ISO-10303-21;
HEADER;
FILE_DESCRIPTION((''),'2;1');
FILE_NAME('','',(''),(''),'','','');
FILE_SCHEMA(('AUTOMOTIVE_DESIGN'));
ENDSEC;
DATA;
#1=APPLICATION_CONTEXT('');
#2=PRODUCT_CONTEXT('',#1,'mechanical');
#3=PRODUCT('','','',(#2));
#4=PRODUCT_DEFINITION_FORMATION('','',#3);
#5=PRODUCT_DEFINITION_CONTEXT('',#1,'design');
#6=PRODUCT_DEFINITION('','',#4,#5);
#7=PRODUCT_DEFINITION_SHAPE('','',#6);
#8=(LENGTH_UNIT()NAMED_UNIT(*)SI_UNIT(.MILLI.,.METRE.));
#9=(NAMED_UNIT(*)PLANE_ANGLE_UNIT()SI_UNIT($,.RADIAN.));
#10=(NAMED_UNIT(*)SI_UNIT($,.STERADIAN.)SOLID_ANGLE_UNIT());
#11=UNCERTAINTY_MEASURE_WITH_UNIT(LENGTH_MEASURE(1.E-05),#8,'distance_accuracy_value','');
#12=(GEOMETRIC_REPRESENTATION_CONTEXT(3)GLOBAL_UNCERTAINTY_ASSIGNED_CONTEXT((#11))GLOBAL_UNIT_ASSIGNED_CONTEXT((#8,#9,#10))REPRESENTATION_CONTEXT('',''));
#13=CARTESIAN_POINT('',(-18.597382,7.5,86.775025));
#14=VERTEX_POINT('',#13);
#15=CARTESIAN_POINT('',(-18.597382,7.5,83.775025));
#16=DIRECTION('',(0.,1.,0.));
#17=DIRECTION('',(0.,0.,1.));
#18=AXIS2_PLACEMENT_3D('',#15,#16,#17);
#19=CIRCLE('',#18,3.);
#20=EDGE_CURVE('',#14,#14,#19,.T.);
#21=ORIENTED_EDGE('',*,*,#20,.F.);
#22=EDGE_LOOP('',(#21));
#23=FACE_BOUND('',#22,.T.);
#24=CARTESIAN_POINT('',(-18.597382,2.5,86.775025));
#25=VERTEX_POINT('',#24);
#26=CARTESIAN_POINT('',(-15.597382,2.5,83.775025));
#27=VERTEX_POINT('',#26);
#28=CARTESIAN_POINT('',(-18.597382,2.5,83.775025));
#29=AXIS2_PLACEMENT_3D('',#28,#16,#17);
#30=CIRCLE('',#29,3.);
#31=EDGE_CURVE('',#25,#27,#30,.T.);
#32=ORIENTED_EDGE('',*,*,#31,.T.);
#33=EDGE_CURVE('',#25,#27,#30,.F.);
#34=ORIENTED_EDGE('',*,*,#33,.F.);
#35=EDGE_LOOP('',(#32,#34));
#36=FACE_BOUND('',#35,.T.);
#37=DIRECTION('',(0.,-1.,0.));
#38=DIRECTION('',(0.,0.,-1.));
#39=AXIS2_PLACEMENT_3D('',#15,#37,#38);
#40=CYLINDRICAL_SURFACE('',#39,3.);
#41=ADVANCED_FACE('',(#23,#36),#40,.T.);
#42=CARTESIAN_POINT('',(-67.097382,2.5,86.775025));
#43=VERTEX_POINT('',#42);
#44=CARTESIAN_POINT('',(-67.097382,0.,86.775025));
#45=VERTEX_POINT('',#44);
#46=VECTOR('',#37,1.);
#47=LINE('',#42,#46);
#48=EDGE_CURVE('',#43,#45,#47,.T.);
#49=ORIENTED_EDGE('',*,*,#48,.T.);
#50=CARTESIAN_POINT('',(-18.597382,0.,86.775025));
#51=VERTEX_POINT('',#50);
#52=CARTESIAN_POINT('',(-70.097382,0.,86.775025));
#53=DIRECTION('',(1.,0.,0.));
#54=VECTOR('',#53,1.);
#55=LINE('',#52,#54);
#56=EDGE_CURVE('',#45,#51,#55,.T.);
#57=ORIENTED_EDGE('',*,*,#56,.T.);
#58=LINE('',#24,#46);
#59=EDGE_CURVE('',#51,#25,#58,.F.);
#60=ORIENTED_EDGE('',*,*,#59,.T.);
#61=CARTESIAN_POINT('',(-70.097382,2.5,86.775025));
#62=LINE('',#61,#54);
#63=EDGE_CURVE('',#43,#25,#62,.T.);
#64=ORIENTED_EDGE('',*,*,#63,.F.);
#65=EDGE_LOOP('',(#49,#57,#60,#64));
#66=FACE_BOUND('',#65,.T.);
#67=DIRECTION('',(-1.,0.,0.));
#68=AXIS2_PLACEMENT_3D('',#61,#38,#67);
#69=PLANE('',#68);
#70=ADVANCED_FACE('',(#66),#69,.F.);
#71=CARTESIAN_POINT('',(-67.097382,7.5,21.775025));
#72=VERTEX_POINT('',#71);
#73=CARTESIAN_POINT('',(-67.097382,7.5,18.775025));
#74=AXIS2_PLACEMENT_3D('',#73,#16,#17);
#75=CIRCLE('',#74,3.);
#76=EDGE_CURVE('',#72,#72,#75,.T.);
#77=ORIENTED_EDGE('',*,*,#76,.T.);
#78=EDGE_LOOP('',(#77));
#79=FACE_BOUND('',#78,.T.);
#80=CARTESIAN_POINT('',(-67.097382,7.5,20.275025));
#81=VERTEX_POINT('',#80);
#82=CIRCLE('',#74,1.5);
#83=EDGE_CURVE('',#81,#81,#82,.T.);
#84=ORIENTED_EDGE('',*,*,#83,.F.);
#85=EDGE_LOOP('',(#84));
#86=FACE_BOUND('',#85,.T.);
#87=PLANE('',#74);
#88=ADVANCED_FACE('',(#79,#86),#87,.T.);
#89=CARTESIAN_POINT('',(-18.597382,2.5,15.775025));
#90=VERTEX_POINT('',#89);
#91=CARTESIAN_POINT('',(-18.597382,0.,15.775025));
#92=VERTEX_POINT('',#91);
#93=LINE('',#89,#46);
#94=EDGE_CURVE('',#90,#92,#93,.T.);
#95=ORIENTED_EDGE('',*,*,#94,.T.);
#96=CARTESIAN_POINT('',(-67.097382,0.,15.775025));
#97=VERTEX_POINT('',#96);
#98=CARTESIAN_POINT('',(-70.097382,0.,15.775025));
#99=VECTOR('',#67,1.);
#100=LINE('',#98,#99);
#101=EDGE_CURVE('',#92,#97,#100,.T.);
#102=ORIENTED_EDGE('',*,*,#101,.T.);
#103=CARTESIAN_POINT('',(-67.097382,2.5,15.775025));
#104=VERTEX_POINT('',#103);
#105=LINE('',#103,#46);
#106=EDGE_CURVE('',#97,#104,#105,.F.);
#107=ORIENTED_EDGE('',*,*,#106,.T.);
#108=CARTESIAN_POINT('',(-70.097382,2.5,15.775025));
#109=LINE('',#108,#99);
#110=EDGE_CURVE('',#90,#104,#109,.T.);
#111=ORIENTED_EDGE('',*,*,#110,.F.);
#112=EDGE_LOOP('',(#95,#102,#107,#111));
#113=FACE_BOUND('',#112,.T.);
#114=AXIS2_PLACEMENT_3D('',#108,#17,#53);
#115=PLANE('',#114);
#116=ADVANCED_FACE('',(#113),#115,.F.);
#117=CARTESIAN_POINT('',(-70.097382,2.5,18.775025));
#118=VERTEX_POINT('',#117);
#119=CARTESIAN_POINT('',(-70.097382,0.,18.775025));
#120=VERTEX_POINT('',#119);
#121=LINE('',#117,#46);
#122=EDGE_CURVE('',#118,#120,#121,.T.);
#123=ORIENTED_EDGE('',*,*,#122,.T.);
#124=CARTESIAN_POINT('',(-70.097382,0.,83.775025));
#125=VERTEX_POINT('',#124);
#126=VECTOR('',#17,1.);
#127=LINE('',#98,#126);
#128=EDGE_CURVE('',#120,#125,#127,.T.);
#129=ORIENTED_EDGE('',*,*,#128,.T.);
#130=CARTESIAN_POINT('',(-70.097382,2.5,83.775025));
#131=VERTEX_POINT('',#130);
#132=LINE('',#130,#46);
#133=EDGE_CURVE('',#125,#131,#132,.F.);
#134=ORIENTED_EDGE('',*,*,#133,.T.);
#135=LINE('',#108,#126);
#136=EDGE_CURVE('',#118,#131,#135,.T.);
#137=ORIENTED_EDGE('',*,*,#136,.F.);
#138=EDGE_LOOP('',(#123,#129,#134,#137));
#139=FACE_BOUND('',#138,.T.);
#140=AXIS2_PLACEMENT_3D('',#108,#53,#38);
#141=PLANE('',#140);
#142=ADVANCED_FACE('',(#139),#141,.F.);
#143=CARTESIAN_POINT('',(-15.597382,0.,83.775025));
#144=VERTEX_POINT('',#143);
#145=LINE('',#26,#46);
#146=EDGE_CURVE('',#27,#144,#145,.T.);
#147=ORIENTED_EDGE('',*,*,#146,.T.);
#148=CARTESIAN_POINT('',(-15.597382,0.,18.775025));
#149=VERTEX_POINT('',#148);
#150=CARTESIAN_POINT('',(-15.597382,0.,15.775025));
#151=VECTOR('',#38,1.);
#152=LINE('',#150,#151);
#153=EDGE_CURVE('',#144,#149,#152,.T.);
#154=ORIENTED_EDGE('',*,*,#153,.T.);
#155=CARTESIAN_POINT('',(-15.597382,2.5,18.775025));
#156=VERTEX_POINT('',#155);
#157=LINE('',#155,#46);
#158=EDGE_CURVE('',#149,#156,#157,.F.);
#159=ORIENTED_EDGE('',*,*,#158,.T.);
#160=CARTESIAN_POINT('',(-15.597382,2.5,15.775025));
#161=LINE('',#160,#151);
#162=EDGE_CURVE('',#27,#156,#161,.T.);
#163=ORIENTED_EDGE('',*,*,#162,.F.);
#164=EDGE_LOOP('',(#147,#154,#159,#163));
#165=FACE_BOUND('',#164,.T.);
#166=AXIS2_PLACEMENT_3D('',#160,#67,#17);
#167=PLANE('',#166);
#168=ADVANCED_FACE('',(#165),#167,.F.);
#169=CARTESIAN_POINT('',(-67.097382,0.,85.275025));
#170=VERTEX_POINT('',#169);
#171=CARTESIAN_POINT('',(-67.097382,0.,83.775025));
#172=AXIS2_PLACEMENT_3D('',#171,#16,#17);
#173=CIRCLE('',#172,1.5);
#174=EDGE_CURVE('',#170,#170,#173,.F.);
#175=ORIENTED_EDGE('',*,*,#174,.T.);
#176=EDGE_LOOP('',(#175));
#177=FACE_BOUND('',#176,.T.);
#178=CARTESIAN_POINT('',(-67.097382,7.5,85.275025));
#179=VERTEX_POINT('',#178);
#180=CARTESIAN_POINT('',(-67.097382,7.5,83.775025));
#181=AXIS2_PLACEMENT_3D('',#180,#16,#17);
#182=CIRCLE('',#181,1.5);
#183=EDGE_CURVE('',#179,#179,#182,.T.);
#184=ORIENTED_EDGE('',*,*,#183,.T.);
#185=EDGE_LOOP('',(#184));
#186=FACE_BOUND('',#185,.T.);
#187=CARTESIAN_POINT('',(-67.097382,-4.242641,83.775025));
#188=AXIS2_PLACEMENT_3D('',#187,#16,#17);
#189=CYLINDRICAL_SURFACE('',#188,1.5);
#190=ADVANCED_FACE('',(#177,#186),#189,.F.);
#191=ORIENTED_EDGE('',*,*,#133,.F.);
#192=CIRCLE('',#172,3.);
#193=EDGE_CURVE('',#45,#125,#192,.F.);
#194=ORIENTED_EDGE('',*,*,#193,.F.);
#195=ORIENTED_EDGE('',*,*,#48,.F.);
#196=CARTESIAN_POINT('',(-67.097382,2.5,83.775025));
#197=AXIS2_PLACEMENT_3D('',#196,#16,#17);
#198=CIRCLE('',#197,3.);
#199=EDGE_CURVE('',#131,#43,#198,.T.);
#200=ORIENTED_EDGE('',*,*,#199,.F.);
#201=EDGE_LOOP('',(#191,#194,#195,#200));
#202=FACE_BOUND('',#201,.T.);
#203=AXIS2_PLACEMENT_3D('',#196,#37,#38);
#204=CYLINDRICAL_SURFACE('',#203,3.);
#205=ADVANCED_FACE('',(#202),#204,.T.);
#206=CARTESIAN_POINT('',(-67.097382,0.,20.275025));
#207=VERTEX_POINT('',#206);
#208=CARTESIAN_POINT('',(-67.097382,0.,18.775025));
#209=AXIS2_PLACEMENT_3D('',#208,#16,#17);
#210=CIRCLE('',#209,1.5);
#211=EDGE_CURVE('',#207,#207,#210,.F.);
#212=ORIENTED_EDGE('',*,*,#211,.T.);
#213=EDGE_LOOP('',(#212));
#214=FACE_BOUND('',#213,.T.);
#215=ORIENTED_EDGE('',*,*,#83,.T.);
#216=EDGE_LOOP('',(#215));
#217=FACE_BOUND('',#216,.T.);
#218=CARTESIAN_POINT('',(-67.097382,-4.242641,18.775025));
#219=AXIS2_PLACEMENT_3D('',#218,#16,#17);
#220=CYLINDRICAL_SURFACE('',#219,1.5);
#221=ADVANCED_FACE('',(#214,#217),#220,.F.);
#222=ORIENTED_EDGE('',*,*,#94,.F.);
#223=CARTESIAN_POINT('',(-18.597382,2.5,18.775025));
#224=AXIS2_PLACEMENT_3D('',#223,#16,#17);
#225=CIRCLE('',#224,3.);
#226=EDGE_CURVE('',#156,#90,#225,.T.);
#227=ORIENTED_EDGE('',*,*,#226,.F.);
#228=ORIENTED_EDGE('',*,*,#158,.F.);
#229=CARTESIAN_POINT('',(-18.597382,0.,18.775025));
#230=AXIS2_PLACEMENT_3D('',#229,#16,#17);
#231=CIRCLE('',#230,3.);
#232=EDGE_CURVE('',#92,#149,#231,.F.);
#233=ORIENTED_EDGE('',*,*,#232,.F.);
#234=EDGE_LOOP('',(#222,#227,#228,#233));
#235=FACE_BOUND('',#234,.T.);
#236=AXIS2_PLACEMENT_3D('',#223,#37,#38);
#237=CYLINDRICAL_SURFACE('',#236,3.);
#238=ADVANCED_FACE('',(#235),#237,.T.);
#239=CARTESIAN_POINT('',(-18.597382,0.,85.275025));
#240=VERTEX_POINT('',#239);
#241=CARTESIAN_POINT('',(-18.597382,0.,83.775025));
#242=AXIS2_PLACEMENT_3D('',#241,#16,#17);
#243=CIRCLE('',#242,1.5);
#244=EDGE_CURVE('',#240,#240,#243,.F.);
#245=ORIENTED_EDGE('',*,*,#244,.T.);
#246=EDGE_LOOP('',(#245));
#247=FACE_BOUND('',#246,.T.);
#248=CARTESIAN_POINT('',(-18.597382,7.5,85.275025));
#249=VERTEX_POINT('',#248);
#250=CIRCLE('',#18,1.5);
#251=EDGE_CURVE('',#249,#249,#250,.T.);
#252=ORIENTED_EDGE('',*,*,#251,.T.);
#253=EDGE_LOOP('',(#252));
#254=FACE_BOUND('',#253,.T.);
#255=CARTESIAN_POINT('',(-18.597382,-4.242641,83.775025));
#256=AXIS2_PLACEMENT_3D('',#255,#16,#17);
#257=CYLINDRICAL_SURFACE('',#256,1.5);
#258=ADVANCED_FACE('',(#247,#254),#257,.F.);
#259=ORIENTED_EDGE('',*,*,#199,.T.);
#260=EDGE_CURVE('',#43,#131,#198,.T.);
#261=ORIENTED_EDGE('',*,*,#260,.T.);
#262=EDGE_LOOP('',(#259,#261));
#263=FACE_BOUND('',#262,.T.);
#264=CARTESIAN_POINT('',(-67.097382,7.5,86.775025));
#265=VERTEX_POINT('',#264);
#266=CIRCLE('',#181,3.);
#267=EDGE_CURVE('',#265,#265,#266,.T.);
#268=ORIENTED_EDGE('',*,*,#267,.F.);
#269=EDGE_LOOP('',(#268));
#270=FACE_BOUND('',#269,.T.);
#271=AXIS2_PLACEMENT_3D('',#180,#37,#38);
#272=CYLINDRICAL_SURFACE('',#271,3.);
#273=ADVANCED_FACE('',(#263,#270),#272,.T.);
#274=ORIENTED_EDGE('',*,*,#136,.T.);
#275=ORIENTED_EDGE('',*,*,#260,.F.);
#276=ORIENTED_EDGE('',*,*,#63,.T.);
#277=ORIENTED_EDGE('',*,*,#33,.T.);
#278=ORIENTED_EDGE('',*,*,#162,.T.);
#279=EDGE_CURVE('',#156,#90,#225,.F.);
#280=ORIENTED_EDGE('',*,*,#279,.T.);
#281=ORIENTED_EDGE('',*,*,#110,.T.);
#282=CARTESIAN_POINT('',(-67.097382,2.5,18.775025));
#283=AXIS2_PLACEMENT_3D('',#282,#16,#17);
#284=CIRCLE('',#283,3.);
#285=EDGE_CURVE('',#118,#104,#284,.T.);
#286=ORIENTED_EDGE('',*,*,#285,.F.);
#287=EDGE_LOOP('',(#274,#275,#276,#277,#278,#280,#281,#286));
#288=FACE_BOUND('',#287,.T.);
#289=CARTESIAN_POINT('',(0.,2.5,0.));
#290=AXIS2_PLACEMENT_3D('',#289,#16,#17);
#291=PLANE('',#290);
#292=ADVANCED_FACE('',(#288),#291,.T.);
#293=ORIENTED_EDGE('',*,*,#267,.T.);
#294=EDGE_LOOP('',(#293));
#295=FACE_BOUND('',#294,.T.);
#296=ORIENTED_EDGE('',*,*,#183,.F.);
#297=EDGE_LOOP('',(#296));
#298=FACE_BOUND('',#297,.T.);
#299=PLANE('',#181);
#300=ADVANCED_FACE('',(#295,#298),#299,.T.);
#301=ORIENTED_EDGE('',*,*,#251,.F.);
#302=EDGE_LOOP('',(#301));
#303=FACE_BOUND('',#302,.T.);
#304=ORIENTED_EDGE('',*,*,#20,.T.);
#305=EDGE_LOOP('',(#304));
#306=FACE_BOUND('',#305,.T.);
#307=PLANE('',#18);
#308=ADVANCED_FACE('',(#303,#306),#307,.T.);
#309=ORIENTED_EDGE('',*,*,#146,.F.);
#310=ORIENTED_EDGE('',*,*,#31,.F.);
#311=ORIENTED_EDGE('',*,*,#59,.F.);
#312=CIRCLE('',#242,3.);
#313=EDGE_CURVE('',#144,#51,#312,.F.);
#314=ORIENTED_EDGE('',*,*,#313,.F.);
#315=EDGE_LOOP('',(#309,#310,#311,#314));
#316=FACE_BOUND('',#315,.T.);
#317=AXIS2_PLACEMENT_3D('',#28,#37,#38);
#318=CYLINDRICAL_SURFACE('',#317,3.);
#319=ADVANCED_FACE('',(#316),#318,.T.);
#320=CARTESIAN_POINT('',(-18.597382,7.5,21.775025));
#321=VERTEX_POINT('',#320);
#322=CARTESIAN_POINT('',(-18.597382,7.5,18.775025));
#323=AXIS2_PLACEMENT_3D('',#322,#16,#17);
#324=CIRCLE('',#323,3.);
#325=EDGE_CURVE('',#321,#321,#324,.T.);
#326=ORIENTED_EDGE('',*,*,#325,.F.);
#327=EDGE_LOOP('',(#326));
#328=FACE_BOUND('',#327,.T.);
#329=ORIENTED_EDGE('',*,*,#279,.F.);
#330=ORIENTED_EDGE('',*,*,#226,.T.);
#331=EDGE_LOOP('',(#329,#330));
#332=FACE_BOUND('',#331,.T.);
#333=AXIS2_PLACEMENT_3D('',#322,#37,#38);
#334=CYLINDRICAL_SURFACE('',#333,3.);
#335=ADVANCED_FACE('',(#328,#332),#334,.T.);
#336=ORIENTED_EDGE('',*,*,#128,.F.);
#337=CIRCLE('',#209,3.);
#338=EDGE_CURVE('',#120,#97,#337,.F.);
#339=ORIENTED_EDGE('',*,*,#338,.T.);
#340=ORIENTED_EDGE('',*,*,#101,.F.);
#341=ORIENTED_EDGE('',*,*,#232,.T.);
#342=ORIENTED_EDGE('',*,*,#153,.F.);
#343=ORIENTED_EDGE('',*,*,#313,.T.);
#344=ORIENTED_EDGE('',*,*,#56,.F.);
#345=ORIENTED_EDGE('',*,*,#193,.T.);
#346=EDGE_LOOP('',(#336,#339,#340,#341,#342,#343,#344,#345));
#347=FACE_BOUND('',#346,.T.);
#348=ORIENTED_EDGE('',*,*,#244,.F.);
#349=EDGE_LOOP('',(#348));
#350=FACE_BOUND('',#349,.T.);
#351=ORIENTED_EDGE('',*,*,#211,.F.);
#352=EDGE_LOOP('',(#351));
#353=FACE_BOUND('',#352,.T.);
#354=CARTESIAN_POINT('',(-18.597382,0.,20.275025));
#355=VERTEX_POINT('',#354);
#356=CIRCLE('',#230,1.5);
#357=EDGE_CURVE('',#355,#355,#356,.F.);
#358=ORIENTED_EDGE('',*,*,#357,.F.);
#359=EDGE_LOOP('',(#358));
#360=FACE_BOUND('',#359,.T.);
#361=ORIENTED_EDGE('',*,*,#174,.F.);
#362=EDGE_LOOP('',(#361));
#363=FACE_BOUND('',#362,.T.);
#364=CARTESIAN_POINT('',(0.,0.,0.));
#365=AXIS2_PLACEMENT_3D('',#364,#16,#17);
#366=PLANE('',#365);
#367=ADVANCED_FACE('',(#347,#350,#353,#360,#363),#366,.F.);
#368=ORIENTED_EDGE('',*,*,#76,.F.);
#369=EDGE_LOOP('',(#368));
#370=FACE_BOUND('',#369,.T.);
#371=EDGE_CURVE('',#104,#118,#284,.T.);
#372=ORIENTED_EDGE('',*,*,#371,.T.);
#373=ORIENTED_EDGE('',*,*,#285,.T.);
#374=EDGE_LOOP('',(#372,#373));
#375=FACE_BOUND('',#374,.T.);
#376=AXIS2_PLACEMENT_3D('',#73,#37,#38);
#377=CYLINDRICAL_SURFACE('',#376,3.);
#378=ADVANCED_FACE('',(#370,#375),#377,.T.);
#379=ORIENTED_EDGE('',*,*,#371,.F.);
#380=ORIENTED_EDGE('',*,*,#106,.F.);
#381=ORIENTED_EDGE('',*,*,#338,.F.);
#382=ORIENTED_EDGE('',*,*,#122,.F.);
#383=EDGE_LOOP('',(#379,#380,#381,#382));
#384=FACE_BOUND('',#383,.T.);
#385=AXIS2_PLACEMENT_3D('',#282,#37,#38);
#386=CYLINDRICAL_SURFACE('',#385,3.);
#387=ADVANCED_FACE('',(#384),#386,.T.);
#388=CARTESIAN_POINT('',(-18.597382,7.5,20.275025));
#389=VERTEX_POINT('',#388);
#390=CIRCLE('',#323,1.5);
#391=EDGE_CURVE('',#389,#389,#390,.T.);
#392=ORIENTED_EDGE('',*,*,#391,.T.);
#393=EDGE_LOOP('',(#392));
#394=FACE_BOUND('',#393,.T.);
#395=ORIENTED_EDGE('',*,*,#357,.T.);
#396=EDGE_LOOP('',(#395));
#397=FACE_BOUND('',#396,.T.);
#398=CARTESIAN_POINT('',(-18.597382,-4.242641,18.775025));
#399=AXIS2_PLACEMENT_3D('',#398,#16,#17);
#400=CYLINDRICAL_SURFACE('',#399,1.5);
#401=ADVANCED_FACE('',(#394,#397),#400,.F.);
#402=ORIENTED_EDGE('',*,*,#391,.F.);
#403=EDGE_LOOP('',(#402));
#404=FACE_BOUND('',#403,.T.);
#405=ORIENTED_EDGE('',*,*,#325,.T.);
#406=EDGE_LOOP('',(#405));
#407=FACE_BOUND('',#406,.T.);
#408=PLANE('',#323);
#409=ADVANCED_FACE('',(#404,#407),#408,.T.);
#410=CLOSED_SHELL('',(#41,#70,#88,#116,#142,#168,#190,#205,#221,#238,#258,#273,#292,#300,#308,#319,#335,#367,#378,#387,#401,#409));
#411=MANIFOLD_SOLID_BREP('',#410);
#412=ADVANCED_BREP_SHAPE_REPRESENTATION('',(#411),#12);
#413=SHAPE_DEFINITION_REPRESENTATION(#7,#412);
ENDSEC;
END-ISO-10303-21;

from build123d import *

# Parameters (mm, degrees)
SKETCH1_W           = 54.5
SKETCH1_H           = 71
BOSS_EXTRUDE1_DEPTH = 2.5
SKETCH2_R           = 3
BOSS_EXTRUDE2_DEPTH = 5
FILLET1_R           = 3
SKETCH3_R           = 1.5
CUT_EXTRUDE1_DEPTH  = 7.5


with BuildPart() as part:
    # Sketch1 → Boss-Extrude1 (new body)
    with BuildSketch(Plane(origin=(0, 0, 0), x_dir=(1, 0, 0), z_dir=(0, 1, 0))):
        with Locations((-42.847381712, -51.275024631)):
            Rectangle(SKETCH1_W, SKETCH1_H)
    extrude(amount=BOSS_EXTRUDE1_DEPTH)

    # Sketch2 → Boss-Extrude2 (add)
    with BuildSketch(Plane(origin=(0, 2.5, 0), x_dir=(1, 0, 0), z_dir=(0, 1, 0))):
        with Locations(Location((-67.097381712, -18.775024631, 0), (0, 0, 90))):
            Circle(SKETCH2_R)
        with Locations(Location((-18.597381712, -18.775024631, 0), (0, 0, 90))):
            Circle(SKETCH2_R)
        with Locations(Location((-18.597381712, -83.775024631, 0), (0, 0, 270))):
            Circle(SKETCH2_R)
        with Locations(Location((-67.097381712, -83.775024631, 0), (0, 0, 270))):
            Circle(SKETCH2_R)
    extrude(amount=BOSS_EXTRUDE2_DEPTH)

    # Fillet1
    fillet1_edges = [part.edges().sort_by_distance(p)[0] for p in [
        (-70.097381712, 1.25, 15.775024631),
        (-15.597381712, 1.25, 15.775024631),
        (-15.597381712, 1.25, 86.775024631),
        (-70.097381712, 1.25, 86.775024631),
    ]]
    fillet(fillet1_edges, radius=FILLET1_R - 0.0001)  # a hair under: the kernel refuses the full size

    # Sketch3 → Cut-Extrude1 (cut)
    with BuildSketch(Plane(origin=(0, 7.5, 0), x_dir=(1, 0, 0), z_dir=(0, 1, 0))):
        with Locations(Location((-67.097381712, -18.775024631, 0), (0, 0, 270))):
            Circle(SKETCH3_R)
        with Locations(Location((-18.597381712, -18.775024631, 0), (0, 0, 270))):
            Circle(SKETCH3_R)
        with Locations(Location((-18.597381712, -83.775024631, 0), (0, 0, 270))):
            Circle(SKETCH3_R)
        with Locations(Location((-67.097381712, -83.775024631, 0), (0, 0, 270))):
            Circle(SKETCH3_R)
    extrude(amount=-CUT_EXTRUDE1_DEPTH, mode=Mode.SUBTRACT)


solid = part.part
